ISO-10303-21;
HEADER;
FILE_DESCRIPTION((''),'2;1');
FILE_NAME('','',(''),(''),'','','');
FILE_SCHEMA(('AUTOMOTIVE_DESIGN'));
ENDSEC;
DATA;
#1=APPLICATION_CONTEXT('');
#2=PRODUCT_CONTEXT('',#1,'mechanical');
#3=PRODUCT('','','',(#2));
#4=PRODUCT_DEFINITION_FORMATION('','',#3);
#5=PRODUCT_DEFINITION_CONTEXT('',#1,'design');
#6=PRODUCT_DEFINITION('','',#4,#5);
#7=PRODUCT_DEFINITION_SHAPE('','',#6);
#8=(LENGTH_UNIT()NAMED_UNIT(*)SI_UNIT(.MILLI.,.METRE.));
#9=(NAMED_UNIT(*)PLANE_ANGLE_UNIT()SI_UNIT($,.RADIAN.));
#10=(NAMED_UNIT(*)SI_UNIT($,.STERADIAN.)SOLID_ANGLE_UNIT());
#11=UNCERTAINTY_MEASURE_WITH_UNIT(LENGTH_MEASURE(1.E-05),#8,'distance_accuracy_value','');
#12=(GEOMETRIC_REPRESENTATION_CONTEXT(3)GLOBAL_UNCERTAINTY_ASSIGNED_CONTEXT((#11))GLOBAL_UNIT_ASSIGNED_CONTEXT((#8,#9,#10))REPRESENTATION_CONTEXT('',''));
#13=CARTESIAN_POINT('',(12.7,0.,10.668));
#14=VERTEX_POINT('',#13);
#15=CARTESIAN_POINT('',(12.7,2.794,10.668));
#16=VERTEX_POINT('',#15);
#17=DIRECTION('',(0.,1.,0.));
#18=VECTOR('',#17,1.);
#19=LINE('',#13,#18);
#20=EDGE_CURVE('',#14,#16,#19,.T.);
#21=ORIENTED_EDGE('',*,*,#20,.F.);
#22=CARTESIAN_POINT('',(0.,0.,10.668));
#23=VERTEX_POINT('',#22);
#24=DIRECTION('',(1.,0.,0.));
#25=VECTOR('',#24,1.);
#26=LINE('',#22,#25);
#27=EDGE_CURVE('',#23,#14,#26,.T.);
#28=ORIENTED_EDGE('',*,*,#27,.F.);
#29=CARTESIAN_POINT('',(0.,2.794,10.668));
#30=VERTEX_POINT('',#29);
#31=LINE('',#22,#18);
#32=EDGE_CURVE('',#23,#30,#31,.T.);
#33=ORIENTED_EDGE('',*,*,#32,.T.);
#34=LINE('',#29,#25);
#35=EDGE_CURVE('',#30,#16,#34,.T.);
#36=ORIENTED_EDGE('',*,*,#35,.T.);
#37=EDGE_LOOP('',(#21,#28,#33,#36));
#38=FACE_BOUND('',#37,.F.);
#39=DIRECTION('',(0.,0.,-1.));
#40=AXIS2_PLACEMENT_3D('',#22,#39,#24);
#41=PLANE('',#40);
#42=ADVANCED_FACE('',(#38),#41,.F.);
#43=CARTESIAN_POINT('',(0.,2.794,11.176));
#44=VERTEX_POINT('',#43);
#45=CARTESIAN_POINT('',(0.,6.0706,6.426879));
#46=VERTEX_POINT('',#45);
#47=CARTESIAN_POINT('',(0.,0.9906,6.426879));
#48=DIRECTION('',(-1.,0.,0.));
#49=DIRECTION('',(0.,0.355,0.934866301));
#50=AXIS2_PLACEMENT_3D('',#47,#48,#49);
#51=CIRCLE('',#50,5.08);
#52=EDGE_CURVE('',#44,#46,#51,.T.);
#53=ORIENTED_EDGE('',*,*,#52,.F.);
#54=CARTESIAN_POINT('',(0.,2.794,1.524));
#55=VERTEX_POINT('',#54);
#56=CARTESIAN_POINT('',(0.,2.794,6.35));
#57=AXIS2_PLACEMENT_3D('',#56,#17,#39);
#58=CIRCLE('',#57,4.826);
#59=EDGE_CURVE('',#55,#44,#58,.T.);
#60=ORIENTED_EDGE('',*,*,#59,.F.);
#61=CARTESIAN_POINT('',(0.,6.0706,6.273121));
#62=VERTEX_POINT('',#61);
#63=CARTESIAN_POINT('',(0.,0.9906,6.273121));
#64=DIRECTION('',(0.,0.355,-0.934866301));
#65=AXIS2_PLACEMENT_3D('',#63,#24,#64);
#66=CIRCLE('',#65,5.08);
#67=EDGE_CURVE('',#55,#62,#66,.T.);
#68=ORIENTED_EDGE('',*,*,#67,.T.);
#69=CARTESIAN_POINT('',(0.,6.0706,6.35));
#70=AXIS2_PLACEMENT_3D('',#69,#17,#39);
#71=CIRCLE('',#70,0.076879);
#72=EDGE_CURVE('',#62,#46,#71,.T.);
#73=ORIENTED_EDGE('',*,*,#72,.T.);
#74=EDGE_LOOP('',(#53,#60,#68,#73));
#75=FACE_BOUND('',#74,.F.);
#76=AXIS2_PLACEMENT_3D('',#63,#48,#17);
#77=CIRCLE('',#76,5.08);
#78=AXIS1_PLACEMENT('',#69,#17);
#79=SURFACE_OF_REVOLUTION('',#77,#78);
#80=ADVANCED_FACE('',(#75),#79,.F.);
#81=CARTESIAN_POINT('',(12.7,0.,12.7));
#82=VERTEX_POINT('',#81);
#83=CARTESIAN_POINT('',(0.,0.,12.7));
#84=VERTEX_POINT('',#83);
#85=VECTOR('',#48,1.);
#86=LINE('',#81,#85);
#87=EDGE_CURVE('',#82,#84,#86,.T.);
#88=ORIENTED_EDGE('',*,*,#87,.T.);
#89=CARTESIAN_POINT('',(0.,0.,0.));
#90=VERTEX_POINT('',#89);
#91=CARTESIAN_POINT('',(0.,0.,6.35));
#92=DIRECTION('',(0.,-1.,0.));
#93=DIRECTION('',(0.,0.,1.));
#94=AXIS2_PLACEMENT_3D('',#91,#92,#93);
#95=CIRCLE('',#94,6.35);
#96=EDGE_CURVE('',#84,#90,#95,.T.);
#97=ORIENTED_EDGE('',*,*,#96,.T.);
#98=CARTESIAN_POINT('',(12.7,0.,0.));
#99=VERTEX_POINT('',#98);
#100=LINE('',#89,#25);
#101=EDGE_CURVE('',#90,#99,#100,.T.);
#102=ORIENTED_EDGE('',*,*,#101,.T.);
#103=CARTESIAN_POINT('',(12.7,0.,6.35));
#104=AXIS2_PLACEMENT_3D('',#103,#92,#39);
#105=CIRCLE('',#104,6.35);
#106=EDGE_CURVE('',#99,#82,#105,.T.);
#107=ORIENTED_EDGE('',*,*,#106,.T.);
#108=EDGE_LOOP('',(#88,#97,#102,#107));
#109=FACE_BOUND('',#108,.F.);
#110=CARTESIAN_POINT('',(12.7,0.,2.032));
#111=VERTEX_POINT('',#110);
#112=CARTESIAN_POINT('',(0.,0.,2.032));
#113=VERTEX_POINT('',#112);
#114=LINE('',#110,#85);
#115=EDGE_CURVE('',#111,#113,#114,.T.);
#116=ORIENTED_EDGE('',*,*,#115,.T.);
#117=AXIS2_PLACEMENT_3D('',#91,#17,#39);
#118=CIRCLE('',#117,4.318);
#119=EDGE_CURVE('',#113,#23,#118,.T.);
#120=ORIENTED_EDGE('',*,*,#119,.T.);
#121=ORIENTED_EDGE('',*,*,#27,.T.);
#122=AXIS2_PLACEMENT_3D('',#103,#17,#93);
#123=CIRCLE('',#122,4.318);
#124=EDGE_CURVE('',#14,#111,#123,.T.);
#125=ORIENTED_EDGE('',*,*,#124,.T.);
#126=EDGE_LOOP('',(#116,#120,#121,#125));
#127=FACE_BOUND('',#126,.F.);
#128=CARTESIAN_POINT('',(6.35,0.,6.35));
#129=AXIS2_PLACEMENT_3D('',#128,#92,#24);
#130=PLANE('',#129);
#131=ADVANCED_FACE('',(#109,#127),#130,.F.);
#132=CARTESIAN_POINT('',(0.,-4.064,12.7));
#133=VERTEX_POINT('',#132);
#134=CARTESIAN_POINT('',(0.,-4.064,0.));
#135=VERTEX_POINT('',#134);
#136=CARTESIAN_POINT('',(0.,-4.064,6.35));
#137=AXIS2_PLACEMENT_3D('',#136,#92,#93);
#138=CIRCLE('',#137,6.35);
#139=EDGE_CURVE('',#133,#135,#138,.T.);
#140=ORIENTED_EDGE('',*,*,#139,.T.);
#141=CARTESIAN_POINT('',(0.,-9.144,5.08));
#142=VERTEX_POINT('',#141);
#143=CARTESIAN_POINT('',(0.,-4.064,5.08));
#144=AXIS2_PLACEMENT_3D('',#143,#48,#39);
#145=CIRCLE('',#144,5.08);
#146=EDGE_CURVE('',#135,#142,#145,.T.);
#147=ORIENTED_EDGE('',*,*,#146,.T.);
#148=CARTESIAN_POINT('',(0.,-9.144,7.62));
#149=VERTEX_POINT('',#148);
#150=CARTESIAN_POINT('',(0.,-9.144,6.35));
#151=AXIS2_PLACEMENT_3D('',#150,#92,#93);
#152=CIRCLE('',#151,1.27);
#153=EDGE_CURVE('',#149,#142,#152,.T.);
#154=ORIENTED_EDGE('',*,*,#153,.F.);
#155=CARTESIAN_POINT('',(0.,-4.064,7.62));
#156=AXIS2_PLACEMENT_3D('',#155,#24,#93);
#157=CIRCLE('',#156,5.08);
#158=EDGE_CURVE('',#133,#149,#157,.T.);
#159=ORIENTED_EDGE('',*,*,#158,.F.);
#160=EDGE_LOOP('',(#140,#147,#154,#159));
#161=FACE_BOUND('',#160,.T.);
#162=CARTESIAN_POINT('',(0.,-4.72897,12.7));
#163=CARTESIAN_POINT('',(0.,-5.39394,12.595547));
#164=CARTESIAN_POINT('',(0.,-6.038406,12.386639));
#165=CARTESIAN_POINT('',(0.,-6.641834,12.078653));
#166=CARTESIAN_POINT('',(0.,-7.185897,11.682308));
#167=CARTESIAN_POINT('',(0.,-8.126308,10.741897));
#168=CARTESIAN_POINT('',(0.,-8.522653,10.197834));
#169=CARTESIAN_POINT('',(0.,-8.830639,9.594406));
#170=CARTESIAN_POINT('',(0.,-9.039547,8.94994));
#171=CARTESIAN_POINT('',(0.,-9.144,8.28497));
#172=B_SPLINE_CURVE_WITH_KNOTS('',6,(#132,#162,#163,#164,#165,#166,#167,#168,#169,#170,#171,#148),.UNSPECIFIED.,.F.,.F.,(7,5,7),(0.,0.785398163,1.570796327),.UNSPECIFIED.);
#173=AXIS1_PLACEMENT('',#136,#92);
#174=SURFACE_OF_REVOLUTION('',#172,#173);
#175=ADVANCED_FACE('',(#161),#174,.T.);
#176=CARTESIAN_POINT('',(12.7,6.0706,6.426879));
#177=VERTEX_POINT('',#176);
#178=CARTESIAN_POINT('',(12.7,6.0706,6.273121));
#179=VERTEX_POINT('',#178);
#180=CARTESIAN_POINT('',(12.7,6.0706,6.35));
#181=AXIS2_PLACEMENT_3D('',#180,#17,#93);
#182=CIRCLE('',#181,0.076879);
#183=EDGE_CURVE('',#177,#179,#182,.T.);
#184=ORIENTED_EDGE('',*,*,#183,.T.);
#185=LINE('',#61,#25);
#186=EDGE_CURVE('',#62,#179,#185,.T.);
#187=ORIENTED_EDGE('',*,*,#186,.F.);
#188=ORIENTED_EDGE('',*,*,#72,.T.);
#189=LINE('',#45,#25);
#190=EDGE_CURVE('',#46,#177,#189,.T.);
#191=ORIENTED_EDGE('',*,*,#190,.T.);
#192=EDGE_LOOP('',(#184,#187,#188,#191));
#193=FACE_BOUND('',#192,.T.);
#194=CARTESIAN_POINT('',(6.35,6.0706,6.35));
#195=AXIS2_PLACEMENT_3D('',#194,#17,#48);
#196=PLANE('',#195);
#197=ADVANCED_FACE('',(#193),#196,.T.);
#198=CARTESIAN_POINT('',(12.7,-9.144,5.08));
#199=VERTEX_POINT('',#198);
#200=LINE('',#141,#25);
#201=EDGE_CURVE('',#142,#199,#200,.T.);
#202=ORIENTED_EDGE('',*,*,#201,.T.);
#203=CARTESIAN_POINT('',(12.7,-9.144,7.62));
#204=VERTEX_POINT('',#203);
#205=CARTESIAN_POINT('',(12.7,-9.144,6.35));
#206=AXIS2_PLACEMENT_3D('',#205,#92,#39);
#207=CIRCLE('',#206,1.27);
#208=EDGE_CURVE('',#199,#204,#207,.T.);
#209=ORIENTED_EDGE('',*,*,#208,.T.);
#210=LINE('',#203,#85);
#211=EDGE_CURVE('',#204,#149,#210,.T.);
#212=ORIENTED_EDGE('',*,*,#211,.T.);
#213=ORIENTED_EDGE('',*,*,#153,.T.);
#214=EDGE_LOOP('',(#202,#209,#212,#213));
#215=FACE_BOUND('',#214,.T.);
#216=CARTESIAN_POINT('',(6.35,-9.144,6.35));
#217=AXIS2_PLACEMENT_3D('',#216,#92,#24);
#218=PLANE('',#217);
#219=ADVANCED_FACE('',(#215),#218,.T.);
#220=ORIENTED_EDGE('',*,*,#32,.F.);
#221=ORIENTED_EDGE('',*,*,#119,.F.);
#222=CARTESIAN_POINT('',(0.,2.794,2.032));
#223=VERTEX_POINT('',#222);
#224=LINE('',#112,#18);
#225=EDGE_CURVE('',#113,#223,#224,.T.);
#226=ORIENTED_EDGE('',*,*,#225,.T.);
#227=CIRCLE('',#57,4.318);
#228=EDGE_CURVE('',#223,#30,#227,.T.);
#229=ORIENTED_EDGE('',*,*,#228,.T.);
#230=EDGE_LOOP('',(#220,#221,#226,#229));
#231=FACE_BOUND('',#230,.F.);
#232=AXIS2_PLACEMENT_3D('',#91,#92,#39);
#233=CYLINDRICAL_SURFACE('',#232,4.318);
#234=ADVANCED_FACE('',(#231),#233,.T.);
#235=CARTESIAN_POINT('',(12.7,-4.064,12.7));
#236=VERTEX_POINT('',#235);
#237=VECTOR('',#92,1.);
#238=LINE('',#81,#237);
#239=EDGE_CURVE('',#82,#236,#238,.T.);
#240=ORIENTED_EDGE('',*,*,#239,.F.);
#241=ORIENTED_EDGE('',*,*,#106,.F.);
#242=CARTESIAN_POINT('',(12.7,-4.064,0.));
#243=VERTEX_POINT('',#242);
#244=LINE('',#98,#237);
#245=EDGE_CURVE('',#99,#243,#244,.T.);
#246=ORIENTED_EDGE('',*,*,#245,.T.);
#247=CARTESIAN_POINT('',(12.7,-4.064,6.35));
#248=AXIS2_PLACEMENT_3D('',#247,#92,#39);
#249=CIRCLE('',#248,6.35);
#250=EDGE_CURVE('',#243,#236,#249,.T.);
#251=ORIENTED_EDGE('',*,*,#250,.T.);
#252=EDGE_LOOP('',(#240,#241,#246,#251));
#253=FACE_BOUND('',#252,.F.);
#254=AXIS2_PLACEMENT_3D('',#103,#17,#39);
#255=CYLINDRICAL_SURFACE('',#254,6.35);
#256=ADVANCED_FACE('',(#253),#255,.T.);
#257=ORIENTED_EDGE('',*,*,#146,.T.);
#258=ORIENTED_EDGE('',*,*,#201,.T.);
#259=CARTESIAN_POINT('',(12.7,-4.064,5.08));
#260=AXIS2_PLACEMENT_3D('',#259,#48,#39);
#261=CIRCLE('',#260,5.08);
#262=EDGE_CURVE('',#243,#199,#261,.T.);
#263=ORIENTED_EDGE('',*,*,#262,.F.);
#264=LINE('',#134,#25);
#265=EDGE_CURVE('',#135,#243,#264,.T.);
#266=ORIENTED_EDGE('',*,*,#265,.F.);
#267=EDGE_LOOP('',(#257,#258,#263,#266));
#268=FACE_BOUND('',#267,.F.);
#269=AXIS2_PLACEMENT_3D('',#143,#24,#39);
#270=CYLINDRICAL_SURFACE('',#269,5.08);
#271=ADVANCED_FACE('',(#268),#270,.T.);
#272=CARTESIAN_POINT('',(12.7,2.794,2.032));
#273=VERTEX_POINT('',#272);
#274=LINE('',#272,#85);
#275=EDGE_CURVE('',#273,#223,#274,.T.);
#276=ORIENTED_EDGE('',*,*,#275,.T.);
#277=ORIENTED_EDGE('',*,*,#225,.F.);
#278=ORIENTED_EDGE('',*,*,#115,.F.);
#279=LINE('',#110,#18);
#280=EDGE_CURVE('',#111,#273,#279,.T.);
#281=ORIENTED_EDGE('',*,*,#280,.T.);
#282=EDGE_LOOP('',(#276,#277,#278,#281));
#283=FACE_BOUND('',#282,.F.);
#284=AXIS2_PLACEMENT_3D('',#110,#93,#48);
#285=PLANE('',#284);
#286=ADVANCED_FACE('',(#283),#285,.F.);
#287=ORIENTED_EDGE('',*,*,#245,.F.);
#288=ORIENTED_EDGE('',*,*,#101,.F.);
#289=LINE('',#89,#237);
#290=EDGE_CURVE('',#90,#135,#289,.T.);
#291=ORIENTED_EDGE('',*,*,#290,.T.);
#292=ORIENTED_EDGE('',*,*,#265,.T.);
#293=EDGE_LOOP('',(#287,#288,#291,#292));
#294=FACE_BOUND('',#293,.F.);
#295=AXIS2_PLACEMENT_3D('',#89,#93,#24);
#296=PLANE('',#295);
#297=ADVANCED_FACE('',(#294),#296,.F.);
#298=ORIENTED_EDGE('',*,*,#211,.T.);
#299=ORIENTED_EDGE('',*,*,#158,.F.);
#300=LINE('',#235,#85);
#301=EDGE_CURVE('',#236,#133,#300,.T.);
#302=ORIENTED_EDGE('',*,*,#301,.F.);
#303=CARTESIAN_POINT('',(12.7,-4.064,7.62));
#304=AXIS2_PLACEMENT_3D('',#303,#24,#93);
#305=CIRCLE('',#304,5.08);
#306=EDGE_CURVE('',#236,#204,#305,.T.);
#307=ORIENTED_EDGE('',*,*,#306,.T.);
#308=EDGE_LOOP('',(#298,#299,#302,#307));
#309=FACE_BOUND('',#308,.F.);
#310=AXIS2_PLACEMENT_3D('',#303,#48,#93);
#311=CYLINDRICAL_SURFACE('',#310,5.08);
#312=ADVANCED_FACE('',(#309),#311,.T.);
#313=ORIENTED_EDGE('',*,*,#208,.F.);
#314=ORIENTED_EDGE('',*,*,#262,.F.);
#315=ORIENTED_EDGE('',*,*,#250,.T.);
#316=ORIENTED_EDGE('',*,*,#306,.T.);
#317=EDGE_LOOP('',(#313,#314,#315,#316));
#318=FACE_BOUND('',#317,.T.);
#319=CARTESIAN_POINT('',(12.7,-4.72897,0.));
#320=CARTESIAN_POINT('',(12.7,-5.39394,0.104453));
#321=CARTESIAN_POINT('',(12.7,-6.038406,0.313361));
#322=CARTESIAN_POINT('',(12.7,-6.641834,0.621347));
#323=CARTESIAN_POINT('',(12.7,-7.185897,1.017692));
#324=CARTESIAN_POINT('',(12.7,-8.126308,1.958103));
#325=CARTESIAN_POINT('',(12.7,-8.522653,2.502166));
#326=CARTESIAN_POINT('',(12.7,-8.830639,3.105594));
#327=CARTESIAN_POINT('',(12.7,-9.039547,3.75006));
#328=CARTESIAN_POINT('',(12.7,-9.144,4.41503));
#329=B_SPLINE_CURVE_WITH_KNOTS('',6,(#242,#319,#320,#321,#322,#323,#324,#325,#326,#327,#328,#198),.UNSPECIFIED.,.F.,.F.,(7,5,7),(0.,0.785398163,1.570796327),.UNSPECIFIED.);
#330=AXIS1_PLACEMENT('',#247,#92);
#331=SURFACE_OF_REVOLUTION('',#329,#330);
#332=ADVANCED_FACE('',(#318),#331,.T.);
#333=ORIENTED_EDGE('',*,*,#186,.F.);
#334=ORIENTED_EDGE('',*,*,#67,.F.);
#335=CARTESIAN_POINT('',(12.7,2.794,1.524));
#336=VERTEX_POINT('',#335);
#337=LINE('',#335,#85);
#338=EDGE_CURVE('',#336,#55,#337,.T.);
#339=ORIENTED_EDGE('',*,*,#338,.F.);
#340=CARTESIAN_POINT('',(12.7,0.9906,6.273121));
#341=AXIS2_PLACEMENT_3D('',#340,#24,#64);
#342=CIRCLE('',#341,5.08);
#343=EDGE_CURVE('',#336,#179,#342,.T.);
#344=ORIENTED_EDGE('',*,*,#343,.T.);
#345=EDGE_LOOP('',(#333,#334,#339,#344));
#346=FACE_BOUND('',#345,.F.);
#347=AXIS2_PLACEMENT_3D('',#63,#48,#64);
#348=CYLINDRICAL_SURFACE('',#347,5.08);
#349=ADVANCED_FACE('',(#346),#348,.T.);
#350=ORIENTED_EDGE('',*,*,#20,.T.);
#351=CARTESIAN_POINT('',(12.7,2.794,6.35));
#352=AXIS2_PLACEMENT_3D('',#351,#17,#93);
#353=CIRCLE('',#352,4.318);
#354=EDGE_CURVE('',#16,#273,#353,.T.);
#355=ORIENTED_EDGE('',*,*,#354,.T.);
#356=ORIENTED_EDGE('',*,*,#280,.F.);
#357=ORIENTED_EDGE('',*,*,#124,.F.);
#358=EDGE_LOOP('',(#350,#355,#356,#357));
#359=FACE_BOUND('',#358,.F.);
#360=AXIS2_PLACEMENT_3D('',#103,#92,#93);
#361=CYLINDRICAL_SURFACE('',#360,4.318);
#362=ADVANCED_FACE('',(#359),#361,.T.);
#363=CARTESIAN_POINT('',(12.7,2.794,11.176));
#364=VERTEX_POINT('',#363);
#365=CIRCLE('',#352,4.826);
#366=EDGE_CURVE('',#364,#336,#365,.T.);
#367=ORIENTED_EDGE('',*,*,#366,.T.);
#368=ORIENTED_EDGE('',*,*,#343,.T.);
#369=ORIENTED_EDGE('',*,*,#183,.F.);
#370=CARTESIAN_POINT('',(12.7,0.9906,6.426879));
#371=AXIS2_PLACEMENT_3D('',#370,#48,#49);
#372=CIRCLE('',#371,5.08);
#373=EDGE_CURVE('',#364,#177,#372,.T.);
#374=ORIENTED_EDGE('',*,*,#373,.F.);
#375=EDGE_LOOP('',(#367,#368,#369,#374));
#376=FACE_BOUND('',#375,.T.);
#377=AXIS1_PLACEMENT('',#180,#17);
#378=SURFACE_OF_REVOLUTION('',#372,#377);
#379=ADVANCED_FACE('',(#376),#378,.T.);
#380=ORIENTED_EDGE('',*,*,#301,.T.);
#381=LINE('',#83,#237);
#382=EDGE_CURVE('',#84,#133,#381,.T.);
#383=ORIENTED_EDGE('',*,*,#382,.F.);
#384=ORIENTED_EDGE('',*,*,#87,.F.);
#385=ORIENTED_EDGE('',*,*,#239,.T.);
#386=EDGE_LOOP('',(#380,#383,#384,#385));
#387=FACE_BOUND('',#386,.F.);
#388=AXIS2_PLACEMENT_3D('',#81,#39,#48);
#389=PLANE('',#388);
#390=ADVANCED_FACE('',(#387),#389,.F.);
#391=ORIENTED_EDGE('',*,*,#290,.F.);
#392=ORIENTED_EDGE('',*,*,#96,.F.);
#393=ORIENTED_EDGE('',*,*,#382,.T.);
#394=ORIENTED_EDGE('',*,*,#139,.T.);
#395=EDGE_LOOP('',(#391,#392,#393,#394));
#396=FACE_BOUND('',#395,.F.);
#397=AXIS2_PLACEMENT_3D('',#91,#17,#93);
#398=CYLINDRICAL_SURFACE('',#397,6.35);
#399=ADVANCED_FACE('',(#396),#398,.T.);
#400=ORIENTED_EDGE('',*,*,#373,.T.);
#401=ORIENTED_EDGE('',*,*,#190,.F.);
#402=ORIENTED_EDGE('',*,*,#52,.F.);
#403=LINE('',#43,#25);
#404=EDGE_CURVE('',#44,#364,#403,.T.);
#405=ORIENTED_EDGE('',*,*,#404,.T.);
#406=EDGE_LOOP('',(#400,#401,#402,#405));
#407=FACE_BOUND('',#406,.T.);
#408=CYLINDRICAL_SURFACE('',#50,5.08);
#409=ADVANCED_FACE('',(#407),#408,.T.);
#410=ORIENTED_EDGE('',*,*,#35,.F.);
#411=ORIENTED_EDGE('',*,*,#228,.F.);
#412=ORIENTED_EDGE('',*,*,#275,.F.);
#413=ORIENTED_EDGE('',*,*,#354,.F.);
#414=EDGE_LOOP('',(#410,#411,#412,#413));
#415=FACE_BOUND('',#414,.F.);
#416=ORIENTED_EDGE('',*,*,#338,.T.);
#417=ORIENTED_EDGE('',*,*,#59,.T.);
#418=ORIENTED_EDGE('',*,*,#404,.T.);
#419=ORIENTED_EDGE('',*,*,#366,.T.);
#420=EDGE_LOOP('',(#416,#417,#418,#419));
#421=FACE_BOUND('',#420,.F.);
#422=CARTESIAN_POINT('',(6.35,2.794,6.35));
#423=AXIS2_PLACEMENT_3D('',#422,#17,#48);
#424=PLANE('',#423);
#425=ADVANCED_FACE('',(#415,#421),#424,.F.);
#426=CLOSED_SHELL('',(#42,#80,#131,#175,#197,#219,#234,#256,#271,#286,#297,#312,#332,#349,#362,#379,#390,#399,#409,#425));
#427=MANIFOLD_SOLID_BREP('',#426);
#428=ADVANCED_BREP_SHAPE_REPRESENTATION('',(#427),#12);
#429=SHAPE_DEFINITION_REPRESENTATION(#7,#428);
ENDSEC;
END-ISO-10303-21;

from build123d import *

# Parameters (mm, degrees)
F1_DEPTH    = 9.144
F3_DEPTH    = 2.794
F5_DEPTH    = 3.2766
F6_T1_DEPTH = 12.7
F6_T4_ANGLE = 180
F6_T6_ANGLE = 180
F7_R        = 5.08


# Not quite as in the source:
# - a fillet or chamfer that OpenCascade refuses, or shapes differently, is made with other operations: its cross-section is extruded or revolved along the edge and cut away or added


with BuildPart() as f1:
    # F0 (on Front) → F1 (new body)
    with BuildSketch(Plane.XZ):
        with BuildLine():
            Line((12.7, 12.7), (0, 12.7))
            ThreePointArc((0, 12.7), (-6.35, 6.35), (0, 0))
            Line((0, 0), (12.7, 0))
            ThreePointArc((12.7, 0), (19.05, 6.35), (12.7, 12.7))
        make_face()
    extrude(amount=F1_DEPTH)

    # F2 (on face) → F3 (join)
    with BuildSketch(Plane(origin=(0, 0, 0), x_dir=(-1, 0, 0), z_dir=(0, 1, 0))):
        with BuildLine():
            ThreePointArc((0, 2.032), (4.318, 6.35), (0, 10.668))
            Line((0, 10.668), (-12.7, 10.668))
            ThreePointArc((-12.7, 10.668), (-17.018, 6.35), (-12.7, 2.032))
            Line((-12.7, 2.032), (0, 2.032))
        make_face()
    extrude(amount=F3_DEPTH)

    # F4 (on face) → F5 (join)
    with BuildSketch(Plane(origin=(0, 2.794, 0), x_dir=(-1, 0, 0), z_dir=(0, 1, 0))):
        with BuildLine():
            Line((-12.7, 1.524), (0, 1.524))
            ThreePointArc((0, 1.524), (4.826, 6.35), (0, 11.176))
            Line((0, 11.176), (-12.7, 11.176))
            ThreePointArc((-12.7, 11.176), (-17.526, 6.35), (-12.7, 1.524))
        make_face()
    extrude(amount=F5_DEPTH)

    # F6: fillet of radius 5.08 on 4 edges, made by hand

    # F6_s2 → F6_t1 (cut)
    with BuildSketch(Plane.YZ):
        with BuildLine():
            ThreePointArc((2.794, 11.176), (5.1719677188, 9.3117646326), (6.0706, 6.4268791929))
            Line((6.0706, 6.4268791929), (6.0706, 11.176))
            Line((6.0706, 11.176), (2.794, 11.176))
        make_face()
        with BuildLine():
            ThreePointArc((2.794, 1.524), (5.1719677188, 3.3882353674), (6.0706, 6.2731208071))
            Line((6.0706, 6.2731208071), (6.0706, 1.524))
            Line((6.0706, 1.524), (2.794, 1.524))
        make_face()
    extrude(amount=F6_T1_DEPTH, mode=Mode.SUBTRACT)

    # F6_s3 → F6_t4 (revolve, cut)
    with BuildSketch(Plane.YZ.offset(12.7)):
        with BuildLine():
            ThreePointArc((2.794, 11.176), (5.1719677188, 9.3117646326), (6.0706, 6.4268791929))
            Line((6.0706, 6.4268791929), (6.0706, 11.176))
            Line((6.0706, 11.176), (2.794, 11.176))
        make_face()
    revolve(axis=Axis((12.7, 6.0706, 6.35), (0, 1, 0)), revolution_arc=F6_T4_ANGLE, mode=Mode.SUBTRACT)

    # F6_s5 → F6_t6 (revolve, cut)
    with BuildSketch(Plane.YZ):
        with BuildLine():
            ThreePointArc((6.0706, 6.2731208071), (5.1719677188, 3.3882353674), (2.794, 1.524))
            Line((2.794, 1.524), (6.0706, 1.524))
            Line((6.0706, 1.524), (6.0706, 6.2731208071))
        make_face()
    revolve(axis=Axis((0, 6.0706, 6.35), (0, 1, 0)), revolution_arc=F6_T6_ANGLE, mode=Mode.SUBTRACT)

    # F7
    f7_edges = [f1.edges().sort_by_distance(p)[0] for p in [
        (6.35, -9.144, 12.7),
        (19.05, -9.144, 6.35),
        (6.35, -9.144, 0),
        (-6.35, -9.144, 6.35),
    ]]
    fillet(f7_edges, radius=F7_R)


solid = f1.part
